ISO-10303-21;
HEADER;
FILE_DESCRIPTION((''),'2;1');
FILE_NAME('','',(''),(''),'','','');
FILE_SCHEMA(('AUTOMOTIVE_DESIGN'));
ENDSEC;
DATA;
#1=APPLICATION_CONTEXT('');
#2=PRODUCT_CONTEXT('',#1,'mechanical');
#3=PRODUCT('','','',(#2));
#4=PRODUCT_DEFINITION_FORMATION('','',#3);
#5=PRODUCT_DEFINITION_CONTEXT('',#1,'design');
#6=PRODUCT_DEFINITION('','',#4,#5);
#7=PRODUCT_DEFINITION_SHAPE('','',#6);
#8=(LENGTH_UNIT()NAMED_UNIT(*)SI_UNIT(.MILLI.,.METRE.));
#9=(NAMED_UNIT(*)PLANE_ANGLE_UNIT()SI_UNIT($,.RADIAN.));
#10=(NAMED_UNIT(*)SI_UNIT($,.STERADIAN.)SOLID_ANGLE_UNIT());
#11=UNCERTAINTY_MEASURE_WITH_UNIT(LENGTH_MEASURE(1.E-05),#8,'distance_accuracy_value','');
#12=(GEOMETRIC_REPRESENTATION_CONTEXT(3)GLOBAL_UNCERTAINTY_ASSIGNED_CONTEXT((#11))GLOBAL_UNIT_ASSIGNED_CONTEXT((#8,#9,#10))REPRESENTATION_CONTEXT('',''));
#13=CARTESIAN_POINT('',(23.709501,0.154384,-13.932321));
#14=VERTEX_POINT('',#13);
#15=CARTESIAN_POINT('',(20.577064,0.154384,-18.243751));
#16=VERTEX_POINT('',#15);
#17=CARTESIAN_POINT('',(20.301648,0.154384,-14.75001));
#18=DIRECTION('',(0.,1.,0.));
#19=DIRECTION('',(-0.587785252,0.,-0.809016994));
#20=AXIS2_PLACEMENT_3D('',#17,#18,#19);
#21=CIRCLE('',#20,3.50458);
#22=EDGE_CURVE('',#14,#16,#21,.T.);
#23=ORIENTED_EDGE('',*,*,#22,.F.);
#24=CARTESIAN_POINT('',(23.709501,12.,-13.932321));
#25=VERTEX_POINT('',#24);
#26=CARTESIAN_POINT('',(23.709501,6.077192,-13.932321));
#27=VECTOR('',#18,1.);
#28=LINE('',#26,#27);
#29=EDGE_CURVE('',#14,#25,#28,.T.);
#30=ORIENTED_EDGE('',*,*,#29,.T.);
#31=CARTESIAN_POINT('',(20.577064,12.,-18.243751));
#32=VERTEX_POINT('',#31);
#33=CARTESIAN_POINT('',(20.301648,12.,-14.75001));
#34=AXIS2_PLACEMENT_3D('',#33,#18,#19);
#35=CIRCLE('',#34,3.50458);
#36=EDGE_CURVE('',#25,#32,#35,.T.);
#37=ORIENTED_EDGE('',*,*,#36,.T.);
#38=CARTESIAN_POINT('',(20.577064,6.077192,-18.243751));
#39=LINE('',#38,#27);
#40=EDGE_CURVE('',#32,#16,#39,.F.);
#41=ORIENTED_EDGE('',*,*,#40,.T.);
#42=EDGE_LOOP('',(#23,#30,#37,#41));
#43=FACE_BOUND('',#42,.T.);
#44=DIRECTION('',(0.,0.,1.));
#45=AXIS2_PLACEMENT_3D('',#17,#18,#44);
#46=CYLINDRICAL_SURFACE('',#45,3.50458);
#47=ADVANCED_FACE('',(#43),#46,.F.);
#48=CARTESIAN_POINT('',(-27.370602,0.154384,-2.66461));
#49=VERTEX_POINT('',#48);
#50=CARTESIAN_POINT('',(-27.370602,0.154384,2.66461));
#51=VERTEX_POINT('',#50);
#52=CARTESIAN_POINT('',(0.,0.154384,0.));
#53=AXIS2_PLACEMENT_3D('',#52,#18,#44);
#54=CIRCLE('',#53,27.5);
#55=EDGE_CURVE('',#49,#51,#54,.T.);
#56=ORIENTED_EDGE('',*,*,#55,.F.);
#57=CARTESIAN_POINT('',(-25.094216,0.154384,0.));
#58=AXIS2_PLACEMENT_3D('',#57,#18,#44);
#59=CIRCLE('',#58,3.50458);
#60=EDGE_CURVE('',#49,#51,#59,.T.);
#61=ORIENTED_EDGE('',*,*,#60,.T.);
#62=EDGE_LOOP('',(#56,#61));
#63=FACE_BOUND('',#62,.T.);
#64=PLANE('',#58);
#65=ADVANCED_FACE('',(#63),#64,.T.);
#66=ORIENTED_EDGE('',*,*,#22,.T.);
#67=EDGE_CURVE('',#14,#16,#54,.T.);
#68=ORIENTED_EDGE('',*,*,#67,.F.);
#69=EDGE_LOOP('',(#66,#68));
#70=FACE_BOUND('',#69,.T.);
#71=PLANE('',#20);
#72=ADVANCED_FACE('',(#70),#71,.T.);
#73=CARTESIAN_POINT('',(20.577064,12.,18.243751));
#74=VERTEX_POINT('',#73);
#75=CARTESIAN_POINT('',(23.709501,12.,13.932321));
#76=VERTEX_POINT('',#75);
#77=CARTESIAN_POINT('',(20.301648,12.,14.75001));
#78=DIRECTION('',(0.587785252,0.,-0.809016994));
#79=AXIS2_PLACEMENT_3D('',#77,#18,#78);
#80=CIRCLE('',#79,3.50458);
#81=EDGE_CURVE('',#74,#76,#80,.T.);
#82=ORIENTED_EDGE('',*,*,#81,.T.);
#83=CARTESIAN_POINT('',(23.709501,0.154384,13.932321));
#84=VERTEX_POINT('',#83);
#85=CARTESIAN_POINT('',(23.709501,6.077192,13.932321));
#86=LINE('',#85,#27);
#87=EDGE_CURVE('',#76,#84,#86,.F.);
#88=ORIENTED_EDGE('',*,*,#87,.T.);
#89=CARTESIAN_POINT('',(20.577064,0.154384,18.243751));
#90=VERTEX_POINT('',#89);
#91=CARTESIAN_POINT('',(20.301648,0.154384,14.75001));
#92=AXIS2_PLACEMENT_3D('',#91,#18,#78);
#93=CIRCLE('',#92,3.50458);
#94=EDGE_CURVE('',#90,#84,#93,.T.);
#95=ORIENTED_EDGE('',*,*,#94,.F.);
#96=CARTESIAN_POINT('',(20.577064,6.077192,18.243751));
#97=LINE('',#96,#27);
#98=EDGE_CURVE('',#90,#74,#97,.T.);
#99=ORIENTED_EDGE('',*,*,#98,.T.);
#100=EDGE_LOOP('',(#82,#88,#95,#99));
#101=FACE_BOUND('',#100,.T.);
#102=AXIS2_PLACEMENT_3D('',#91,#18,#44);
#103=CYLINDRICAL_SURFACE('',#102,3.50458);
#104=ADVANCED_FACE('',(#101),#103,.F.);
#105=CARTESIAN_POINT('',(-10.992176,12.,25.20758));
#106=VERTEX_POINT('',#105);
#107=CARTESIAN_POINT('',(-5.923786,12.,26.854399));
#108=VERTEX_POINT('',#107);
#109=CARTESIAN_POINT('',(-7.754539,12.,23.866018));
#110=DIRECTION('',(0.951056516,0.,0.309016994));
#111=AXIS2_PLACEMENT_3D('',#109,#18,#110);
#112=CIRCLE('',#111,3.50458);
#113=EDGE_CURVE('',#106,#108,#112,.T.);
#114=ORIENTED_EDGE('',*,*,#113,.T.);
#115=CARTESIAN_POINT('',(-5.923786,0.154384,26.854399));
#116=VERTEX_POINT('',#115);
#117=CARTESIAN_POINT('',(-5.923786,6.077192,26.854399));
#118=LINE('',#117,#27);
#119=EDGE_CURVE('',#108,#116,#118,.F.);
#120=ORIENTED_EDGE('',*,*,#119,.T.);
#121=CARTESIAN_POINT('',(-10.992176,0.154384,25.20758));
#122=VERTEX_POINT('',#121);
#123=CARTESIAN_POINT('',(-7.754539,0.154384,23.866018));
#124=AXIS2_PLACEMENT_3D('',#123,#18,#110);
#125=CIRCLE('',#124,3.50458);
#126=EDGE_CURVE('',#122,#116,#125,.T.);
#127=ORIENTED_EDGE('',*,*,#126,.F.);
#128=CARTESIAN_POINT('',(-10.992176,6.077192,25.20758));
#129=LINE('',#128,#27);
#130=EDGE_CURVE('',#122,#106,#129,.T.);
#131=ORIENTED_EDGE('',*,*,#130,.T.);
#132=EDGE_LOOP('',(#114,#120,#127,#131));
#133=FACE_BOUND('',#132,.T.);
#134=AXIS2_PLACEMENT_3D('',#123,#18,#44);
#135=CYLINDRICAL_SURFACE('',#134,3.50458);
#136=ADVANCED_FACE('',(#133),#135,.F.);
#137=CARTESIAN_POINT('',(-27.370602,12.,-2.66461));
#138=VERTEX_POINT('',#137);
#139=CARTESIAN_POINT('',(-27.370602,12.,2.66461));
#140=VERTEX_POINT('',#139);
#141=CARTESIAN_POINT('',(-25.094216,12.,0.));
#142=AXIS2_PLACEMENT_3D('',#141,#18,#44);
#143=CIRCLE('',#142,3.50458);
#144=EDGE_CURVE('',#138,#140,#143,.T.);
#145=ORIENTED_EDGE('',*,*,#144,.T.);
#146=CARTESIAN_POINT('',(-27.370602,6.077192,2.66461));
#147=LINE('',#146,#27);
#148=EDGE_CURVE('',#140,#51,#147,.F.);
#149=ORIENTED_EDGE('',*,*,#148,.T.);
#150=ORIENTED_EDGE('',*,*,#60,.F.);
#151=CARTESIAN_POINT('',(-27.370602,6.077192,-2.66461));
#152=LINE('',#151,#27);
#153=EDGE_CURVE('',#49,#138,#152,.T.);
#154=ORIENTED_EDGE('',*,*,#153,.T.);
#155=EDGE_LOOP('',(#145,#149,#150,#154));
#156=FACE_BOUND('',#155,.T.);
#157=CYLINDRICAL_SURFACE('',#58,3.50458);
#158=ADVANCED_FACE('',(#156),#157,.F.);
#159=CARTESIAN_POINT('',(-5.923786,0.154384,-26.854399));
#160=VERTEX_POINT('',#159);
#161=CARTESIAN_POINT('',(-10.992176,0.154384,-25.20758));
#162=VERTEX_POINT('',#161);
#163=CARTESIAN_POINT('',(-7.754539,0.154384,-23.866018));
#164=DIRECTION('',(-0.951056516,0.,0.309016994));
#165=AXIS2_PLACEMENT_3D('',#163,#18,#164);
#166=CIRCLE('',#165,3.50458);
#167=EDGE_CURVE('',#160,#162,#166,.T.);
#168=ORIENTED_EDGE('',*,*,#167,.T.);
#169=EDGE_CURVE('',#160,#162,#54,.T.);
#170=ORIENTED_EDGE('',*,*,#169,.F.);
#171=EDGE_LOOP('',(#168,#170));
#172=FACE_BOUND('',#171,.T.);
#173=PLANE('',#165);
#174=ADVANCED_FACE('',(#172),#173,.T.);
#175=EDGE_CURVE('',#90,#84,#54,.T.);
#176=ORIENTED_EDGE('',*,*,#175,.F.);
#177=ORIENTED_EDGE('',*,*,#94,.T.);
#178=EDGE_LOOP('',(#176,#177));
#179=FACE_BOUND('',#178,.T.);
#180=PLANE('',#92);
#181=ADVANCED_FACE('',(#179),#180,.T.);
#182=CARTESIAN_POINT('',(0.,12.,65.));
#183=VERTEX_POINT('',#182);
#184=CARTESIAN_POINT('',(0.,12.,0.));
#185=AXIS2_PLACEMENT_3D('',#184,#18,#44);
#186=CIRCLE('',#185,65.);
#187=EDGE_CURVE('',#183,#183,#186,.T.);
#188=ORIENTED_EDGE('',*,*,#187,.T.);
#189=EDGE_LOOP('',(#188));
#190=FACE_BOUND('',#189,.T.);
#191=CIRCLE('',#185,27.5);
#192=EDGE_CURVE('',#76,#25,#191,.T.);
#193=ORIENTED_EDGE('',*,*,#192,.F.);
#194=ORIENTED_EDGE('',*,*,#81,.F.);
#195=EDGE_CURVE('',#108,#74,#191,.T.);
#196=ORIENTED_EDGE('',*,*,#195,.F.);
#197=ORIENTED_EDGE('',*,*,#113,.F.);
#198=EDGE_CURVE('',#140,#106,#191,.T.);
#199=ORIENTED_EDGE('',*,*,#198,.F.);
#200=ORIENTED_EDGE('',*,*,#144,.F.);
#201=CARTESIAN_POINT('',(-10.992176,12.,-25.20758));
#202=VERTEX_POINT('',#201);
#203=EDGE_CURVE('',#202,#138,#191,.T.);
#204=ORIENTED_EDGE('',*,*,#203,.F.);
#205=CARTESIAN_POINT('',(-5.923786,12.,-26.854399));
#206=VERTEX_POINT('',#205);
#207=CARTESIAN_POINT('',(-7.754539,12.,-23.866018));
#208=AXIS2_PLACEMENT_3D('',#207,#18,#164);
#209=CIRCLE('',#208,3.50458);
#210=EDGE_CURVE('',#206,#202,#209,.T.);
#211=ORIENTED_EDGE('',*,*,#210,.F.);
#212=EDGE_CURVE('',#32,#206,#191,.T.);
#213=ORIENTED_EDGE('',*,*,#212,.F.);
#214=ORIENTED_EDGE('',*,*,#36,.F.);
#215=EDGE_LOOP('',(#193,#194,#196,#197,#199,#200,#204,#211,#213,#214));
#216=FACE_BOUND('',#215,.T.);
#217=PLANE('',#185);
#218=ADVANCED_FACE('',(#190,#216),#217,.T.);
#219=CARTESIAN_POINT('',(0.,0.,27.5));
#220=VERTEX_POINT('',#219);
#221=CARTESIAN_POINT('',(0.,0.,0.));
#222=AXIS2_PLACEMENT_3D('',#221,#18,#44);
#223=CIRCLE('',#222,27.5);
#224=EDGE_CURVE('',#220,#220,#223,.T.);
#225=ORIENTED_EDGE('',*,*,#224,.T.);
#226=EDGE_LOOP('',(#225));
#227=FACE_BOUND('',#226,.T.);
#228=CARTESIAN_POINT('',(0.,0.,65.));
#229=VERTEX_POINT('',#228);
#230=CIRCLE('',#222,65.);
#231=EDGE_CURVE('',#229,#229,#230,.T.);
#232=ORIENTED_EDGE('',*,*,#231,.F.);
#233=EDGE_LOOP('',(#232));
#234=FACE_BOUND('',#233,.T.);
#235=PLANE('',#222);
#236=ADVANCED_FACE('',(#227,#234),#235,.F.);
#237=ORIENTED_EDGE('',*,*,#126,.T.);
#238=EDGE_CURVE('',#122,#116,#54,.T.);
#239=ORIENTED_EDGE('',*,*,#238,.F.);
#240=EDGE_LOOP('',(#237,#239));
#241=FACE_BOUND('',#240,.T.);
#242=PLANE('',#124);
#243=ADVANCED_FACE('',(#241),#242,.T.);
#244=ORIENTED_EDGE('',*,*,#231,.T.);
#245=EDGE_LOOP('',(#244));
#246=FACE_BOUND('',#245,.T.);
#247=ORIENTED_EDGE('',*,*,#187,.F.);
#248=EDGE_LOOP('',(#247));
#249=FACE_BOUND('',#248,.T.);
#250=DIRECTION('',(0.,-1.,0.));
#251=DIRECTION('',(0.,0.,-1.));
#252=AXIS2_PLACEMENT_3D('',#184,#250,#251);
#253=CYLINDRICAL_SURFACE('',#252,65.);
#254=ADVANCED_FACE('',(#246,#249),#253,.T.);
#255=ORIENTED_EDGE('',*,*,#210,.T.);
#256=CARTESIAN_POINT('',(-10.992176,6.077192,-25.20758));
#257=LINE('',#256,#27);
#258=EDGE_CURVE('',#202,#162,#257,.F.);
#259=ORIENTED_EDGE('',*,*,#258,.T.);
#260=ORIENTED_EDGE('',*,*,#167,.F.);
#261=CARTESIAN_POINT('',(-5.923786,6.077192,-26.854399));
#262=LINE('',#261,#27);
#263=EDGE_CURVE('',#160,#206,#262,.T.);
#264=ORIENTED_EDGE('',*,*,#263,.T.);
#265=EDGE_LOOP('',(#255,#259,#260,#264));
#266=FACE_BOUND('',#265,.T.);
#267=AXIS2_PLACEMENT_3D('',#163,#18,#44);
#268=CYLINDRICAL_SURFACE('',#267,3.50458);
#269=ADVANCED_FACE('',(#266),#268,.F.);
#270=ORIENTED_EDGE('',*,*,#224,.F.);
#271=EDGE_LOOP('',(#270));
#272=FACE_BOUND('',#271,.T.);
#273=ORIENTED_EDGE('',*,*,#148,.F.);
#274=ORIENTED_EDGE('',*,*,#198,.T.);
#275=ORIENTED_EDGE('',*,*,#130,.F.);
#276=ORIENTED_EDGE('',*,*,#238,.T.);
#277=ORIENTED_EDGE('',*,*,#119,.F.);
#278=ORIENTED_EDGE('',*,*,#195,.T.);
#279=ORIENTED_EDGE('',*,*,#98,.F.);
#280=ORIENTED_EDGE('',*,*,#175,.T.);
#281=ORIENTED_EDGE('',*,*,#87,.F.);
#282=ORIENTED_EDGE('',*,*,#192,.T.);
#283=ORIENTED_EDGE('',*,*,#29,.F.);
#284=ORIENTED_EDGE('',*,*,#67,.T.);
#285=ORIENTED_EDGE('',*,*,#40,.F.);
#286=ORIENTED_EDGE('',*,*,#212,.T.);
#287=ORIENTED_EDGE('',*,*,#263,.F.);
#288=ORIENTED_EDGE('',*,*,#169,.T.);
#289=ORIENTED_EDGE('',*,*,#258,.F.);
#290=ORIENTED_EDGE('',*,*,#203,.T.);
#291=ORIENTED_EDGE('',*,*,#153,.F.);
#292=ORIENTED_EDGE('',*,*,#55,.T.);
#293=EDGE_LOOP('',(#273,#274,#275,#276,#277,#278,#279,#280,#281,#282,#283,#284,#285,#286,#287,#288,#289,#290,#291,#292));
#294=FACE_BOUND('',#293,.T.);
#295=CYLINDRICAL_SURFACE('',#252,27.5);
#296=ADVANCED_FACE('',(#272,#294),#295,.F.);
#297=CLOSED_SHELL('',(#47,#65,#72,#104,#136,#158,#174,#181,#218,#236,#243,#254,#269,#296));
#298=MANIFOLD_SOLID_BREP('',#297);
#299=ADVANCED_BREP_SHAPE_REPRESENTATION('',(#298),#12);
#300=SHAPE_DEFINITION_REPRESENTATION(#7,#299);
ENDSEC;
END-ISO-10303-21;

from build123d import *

# Parameters (mm, degrees)
SKETCH1_R           = 65
BOSS_EXTRUDE1_DEPTH = 12
SKETCH2_R           = 27.5
CUT_EXTRUDE1_DEPTH  = 93.703829479
SKETCH3_R           = 3.504579596
CUT_EXTRUDE2_DEPTH  = 11.84561613
CIRPATTERN1_COUNT   = 5


with BuildPart() as part:
    # Sketch1 → Boss-Extrude1 (new body)
    with BuildSketch(Plane(origin=(0, 0, 0), x_dir=(1, 0, 0), z_dir=(0, 1, 0))):
        Circle(SKETCH1_R)
    extrude(amount=BOSS_EXTRUDE1_DEPTH)

    # Sketch2 → Cut-Extrude1 (cut, through all)
    with BuildSketch(Plane(origin=(0, 0, 0), x_dir=(1, 0, 0), z_dir=(0, 1, 0))):
        Circle(SKETCH2_R)
    extrude(amount=CUT_EXTRUDE1_DEPTH, mode=Mode.SUBTRACT)

    # Sketch3 → Cut-Extrude2 (cut)
    with BuildSketch(Plane(origin=(0, 12, 0), x_dir=(1, 0, 0), z_dir=(0, 1, 0))):
        with Locations((-25.094216448, 0)):
            Circle(SKETCH3_R)
    cut_extrude2 = extrude(amount=-CUT_EXTRUDE2_DEPTH, mode=Mode.SUBTRACT)

    # CirPattern1: Cut-Extrude2 ×5 about axis
    cirpattern1_axis = Axis((0, 0, 0), (0, 1, 0))
    for i in range(1, CIRPATTERN1_COUNT):
        add(cut_extrude2.rotate(cirpattern1_axis, i * 360 / CIRPATTERN1_COUNT), mode=Mode.SUBTRACT)


solid = part.part
